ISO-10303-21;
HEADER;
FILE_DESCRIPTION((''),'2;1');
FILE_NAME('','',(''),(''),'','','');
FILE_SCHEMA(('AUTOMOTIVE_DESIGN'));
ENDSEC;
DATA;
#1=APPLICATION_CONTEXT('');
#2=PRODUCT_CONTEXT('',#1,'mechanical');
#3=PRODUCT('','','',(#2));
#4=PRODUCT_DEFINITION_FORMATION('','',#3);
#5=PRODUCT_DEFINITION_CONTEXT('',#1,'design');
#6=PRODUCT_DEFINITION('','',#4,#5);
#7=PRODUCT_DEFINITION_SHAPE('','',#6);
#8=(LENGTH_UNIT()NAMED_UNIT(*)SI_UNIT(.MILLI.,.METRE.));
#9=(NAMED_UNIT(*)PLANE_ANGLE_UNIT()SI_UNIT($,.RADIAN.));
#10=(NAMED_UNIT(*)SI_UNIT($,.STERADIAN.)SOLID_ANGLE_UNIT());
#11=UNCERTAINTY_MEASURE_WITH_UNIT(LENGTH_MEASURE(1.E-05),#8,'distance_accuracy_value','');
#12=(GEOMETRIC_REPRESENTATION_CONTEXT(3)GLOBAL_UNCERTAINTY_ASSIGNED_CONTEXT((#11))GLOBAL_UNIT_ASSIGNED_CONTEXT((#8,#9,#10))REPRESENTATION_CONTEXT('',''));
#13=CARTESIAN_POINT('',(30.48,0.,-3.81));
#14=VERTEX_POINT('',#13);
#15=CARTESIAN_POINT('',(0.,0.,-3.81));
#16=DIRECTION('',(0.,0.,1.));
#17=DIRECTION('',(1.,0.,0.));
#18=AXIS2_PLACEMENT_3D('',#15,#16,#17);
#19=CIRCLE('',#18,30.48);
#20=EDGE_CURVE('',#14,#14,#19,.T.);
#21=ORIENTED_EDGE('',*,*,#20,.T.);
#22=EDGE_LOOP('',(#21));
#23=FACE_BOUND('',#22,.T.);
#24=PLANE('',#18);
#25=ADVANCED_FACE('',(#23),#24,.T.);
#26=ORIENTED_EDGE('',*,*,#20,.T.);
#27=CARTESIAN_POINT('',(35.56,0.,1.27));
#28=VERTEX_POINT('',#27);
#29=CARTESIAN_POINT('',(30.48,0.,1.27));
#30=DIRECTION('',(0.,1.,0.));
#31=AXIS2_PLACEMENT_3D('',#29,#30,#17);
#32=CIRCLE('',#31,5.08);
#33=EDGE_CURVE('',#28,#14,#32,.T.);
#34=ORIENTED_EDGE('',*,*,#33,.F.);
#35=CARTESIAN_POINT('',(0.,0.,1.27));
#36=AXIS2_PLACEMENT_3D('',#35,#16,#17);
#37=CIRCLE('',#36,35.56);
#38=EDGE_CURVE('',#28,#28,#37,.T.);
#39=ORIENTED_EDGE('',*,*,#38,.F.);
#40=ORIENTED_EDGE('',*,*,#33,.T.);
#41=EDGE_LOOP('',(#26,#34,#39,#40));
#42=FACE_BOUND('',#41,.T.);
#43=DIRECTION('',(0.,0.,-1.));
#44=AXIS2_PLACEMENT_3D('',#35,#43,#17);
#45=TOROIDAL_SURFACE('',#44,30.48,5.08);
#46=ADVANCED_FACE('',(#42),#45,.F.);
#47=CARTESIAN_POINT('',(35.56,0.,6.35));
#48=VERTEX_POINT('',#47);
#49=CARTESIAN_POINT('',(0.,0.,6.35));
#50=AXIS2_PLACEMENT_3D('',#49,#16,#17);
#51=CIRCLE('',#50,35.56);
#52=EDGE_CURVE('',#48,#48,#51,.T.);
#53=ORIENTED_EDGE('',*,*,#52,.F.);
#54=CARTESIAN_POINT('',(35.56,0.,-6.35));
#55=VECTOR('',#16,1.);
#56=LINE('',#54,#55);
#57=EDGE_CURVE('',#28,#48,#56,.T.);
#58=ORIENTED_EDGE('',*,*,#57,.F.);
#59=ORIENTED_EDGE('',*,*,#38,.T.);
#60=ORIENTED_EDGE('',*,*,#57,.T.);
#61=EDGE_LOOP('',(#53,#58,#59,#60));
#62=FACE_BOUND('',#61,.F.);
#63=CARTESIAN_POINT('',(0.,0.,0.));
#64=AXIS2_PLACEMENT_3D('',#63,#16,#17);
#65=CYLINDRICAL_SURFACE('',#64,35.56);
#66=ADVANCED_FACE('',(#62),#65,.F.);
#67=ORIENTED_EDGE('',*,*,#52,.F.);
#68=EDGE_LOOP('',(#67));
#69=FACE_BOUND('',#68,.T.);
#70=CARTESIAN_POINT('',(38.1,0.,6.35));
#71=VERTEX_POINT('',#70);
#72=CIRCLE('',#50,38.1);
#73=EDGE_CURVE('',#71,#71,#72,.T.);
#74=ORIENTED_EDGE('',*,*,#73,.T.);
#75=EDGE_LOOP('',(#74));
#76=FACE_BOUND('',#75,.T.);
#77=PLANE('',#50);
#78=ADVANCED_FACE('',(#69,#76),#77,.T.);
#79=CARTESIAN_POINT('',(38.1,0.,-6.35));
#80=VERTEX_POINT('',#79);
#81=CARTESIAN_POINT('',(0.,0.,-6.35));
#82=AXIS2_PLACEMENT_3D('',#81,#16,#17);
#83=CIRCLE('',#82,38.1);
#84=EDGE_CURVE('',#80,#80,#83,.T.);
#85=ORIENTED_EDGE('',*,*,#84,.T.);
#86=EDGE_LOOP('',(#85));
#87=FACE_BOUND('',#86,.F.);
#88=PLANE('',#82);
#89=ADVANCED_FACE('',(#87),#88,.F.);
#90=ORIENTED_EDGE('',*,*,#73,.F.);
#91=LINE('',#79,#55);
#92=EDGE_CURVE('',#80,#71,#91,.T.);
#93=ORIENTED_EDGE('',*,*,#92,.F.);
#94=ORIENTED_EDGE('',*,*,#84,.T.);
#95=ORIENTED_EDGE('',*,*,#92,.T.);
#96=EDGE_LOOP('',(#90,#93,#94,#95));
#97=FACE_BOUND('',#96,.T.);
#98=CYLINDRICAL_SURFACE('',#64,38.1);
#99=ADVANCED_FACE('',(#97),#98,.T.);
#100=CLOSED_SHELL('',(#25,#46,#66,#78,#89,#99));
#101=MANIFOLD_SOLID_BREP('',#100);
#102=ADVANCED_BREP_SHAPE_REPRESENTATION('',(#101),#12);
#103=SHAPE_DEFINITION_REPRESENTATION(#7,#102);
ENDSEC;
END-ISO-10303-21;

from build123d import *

# Parameters (mm, degrees)
F0_R     = 38.1
F1_DEPTH = 6.35
F2_T     = -2.54
F3_R     = 5.08


with BuildPart() as f1:
    # F0 (on Top) → F1 (new body, symmetric)
    with BuildSketch(Plane.XY):
        Circle(F0_R)
    extrude(amount=F1_DEPTH, both=True)

    # F2
    f2_openings = [f1.faces().sort_by_distance(p)[0] for p in [
        (0, 0, 6.35),
    ]]
    offset(amount=F2_T, openings=f2_openings)

    # F3
    f3_edges = [f1.edges().sort_by_distance(p)[0] for p in [
        (-35.56, 0, -3.81),
    ]]
    fillet(f3_edges, radius=F3_R)


solid = f1.part
